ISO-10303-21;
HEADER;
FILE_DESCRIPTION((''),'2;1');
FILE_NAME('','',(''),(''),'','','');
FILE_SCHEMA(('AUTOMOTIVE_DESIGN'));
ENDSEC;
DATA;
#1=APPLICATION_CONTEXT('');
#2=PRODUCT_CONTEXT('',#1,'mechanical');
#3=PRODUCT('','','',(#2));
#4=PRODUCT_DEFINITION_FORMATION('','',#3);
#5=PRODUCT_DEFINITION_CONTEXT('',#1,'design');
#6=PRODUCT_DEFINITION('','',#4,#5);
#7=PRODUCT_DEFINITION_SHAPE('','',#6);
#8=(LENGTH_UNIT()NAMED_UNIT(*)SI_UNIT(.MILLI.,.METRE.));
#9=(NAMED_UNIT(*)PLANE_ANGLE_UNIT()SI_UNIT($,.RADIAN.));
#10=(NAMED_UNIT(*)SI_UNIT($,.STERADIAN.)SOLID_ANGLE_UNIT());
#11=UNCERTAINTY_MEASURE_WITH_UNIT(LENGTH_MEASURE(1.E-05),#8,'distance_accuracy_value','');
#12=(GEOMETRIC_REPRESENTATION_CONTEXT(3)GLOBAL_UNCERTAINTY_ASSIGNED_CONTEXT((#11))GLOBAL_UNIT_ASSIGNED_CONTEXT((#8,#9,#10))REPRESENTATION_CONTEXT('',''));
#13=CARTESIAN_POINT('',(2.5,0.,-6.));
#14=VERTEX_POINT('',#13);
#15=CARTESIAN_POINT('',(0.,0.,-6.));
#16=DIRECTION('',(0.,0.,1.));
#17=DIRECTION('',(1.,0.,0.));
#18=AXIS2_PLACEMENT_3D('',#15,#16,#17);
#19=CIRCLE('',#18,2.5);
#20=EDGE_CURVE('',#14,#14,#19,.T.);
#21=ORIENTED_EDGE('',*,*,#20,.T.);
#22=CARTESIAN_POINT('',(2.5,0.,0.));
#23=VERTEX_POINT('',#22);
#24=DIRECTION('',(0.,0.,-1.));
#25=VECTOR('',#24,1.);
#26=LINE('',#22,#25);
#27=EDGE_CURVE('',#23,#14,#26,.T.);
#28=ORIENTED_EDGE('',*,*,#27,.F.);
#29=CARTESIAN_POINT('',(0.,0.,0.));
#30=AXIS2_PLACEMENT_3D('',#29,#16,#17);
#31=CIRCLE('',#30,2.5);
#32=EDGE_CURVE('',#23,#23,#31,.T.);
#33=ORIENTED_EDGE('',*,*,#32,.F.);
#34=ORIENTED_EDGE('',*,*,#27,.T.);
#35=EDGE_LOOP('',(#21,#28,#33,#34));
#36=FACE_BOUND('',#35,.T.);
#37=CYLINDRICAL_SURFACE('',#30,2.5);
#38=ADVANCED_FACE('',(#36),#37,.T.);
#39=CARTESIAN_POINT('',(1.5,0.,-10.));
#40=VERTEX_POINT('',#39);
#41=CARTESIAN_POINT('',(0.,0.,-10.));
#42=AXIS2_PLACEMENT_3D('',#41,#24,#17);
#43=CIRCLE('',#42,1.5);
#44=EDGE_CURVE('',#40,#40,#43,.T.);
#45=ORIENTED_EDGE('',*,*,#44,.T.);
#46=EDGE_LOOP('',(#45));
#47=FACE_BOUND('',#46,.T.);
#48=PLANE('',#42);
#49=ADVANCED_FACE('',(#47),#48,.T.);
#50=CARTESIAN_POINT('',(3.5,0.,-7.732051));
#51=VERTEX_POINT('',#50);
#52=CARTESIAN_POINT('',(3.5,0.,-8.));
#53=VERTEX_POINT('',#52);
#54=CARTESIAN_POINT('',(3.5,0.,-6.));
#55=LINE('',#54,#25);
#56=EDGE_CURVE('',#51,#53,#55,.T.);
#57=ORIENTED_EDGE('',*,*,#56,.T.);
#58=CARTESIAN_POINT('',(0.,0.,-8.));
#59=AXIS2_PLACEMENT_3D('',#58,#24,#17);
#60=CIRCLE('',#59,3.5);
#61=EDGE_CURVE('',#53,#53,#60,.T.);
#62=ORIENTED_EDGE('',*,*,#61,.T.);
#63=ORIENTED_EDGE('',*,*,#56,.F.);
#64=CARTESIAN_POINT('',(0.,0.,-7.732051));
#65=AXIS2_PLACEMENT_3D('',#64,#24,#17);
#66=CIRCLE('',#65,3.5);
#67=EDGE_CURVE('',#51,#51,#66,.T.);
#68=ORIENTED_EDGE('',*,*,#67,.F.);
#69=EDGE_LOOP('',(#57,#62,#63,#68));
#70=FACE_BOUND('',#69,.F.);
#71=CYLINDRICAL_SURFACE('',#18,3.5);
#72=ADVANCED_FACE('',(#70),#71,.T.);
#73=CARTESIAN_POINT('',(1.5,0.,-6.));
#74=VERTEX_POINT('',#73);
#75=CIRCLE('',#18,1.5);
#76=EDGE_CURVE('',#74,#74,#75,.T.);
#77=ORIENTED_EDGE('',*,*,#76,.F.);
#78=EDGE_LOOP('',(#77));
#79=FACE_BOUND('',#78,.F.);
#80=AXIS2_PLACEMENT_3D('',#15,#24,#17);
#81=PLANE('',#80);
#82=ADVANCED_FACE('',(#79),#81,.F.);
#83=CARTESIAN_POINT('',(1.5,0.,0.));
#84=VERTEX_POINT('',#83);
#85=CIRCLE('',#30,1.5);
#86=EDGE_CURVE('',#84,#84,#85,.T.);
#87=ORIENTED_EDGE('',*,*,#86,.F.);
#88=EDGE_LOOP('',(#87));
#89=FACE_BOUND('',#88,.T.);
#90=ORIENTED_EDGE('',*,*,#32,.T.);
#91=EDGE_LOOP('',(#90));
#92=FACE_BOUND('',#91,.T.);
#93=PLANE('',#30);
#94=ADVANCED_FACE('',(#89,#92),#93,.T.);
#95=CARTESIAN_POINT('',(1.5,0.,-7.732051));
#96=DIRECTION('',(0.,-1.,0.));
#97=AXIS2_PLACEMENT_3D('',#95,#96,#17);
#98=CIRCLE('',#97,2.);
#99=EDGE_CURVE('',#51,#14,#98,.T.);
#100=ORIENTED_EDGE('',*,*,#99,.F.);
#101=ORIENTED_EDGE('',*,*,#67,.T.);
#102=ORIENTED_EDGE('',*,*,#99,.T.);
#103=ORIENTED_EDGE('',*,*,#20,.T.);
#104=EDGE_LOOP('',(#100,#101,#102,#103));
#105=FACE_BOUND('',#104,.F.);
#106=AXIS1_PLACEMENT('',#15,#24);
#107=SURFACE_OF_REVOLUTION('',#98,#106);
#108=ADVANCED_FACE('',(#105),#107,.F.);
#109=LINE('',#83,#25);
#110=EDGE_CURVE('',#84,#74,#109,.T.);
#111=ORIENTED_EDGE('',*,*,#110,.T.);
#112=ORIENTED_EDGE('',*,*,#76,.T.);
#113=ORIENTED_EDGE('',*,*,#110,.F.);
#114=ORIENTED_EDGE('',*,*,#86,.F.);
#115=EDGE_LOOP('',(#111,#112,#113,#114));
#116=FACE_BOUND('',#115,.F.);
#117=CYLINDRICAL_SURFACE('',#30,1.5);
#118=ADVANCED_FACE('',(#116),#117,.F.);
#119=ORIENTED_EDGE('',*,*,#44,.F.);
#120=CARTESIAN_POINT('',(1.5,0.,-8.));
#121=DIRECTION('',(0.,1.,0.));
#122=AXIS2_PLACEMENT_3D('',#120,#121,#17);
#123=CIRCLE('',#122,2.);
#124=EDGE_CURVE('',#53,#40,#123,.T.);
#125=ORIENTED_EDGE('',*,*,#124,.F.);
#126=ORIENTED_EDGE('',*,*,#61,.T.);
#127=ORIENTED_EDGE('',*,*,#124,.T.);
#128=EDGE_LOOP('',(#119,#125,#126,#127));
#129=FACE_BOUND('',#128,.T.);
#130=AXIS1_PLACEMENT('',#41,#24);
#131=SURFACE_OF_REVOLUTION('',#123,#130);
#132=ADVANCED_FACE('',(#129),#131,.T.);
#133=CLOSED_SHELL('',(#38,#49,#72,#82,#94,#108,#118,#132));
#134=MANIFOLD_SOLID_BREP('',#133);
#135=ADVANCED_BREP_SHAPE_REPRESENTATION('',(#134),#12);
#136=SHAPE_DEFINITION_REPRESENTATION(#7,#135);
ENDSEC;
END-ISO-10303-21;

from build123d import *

# Parameters (mm, degrees)
F0_R     = 2.5
F0_R_2   = 1.5
F1_DEPTH = 6
F2_DEPTH = 7
F3_R     = 3.5
F3_R_2   = 2.5
F3_R_3   = 1.5
F4_DEPTH = 4


# Not quite as in the source:
# - a fillet or chamfer that OpenCascade refuses, or shapes differently, is made with other operations: its cross-section is extruded or revolved along the edge and cut away or added


with BuildPart() as f1:
    # F0 (on Top) → F1 (new body)
    with BuildSketch(Plane.XY):
        Circle(F0_R)
        Circle(F0_R_2, mode=Mode.SUBTRACT)
    extrude(amount=-F1_DEPTH)

    # F0 (on Top) → F2 (cut)
    with BuildSketch(Plane.XY):
        Circle(F0_R_2)
    extrude(amount=-F2_DEPTH, mode=Mode.SUBTRACT)

    # F3 (on face) → F4 (join)
    with BuildSketch(Plane(origin=(0, 0, -6), x_dir=(1, 0, 0), z_dir=(0, 0, -1))):
        Circle(F3_R)
        Circle(F3_R_2, mode=Mode.SUBTRACT)
        Circle(F3_R_2)
        Circle(F3_R_3, mode=Mode.SUBTRACT)
        Circle(F3_R_3)
    extrude(amount=F4_DEPTH)

    # F5: fillet of radius 2 on 2 edges, made by hand

    # F5_s1 → F5_t2 (revolve, cut)
    with BuildSketch(Plane.XZ):
        with BuildLine():
            ThreePointArc((3.5, -8), (2.9142135624, -9.4142135624), (1.5, -10))
            Line((1.5, -10), (3.5, -10))
            Line((3.5, -10), (3.5, -8))
        make_face()
    revolve(axis=Axis((0, 0, -10), (0, 0, -1)), mode=Mode.SUBTRACT)

    # F5_s3 → F5_t4 (revolve, cut)
    with BuildSketch(Plane.XZ):
        with BuildLine():
            ThreePointArc((3.5, -7.7320508076), (3.2320508076, -6.7320508076), (2.5, -6))
            Line((2.5, -6), (3.5, -6))
            Line((3.5, -6), (3.5, -7.7320508076))
        make_face()
    revolve(axis=Axis((0, 0, -6), (0, 0, -1)), mode=Mode.SUBTRACT)


solid = f1.part
